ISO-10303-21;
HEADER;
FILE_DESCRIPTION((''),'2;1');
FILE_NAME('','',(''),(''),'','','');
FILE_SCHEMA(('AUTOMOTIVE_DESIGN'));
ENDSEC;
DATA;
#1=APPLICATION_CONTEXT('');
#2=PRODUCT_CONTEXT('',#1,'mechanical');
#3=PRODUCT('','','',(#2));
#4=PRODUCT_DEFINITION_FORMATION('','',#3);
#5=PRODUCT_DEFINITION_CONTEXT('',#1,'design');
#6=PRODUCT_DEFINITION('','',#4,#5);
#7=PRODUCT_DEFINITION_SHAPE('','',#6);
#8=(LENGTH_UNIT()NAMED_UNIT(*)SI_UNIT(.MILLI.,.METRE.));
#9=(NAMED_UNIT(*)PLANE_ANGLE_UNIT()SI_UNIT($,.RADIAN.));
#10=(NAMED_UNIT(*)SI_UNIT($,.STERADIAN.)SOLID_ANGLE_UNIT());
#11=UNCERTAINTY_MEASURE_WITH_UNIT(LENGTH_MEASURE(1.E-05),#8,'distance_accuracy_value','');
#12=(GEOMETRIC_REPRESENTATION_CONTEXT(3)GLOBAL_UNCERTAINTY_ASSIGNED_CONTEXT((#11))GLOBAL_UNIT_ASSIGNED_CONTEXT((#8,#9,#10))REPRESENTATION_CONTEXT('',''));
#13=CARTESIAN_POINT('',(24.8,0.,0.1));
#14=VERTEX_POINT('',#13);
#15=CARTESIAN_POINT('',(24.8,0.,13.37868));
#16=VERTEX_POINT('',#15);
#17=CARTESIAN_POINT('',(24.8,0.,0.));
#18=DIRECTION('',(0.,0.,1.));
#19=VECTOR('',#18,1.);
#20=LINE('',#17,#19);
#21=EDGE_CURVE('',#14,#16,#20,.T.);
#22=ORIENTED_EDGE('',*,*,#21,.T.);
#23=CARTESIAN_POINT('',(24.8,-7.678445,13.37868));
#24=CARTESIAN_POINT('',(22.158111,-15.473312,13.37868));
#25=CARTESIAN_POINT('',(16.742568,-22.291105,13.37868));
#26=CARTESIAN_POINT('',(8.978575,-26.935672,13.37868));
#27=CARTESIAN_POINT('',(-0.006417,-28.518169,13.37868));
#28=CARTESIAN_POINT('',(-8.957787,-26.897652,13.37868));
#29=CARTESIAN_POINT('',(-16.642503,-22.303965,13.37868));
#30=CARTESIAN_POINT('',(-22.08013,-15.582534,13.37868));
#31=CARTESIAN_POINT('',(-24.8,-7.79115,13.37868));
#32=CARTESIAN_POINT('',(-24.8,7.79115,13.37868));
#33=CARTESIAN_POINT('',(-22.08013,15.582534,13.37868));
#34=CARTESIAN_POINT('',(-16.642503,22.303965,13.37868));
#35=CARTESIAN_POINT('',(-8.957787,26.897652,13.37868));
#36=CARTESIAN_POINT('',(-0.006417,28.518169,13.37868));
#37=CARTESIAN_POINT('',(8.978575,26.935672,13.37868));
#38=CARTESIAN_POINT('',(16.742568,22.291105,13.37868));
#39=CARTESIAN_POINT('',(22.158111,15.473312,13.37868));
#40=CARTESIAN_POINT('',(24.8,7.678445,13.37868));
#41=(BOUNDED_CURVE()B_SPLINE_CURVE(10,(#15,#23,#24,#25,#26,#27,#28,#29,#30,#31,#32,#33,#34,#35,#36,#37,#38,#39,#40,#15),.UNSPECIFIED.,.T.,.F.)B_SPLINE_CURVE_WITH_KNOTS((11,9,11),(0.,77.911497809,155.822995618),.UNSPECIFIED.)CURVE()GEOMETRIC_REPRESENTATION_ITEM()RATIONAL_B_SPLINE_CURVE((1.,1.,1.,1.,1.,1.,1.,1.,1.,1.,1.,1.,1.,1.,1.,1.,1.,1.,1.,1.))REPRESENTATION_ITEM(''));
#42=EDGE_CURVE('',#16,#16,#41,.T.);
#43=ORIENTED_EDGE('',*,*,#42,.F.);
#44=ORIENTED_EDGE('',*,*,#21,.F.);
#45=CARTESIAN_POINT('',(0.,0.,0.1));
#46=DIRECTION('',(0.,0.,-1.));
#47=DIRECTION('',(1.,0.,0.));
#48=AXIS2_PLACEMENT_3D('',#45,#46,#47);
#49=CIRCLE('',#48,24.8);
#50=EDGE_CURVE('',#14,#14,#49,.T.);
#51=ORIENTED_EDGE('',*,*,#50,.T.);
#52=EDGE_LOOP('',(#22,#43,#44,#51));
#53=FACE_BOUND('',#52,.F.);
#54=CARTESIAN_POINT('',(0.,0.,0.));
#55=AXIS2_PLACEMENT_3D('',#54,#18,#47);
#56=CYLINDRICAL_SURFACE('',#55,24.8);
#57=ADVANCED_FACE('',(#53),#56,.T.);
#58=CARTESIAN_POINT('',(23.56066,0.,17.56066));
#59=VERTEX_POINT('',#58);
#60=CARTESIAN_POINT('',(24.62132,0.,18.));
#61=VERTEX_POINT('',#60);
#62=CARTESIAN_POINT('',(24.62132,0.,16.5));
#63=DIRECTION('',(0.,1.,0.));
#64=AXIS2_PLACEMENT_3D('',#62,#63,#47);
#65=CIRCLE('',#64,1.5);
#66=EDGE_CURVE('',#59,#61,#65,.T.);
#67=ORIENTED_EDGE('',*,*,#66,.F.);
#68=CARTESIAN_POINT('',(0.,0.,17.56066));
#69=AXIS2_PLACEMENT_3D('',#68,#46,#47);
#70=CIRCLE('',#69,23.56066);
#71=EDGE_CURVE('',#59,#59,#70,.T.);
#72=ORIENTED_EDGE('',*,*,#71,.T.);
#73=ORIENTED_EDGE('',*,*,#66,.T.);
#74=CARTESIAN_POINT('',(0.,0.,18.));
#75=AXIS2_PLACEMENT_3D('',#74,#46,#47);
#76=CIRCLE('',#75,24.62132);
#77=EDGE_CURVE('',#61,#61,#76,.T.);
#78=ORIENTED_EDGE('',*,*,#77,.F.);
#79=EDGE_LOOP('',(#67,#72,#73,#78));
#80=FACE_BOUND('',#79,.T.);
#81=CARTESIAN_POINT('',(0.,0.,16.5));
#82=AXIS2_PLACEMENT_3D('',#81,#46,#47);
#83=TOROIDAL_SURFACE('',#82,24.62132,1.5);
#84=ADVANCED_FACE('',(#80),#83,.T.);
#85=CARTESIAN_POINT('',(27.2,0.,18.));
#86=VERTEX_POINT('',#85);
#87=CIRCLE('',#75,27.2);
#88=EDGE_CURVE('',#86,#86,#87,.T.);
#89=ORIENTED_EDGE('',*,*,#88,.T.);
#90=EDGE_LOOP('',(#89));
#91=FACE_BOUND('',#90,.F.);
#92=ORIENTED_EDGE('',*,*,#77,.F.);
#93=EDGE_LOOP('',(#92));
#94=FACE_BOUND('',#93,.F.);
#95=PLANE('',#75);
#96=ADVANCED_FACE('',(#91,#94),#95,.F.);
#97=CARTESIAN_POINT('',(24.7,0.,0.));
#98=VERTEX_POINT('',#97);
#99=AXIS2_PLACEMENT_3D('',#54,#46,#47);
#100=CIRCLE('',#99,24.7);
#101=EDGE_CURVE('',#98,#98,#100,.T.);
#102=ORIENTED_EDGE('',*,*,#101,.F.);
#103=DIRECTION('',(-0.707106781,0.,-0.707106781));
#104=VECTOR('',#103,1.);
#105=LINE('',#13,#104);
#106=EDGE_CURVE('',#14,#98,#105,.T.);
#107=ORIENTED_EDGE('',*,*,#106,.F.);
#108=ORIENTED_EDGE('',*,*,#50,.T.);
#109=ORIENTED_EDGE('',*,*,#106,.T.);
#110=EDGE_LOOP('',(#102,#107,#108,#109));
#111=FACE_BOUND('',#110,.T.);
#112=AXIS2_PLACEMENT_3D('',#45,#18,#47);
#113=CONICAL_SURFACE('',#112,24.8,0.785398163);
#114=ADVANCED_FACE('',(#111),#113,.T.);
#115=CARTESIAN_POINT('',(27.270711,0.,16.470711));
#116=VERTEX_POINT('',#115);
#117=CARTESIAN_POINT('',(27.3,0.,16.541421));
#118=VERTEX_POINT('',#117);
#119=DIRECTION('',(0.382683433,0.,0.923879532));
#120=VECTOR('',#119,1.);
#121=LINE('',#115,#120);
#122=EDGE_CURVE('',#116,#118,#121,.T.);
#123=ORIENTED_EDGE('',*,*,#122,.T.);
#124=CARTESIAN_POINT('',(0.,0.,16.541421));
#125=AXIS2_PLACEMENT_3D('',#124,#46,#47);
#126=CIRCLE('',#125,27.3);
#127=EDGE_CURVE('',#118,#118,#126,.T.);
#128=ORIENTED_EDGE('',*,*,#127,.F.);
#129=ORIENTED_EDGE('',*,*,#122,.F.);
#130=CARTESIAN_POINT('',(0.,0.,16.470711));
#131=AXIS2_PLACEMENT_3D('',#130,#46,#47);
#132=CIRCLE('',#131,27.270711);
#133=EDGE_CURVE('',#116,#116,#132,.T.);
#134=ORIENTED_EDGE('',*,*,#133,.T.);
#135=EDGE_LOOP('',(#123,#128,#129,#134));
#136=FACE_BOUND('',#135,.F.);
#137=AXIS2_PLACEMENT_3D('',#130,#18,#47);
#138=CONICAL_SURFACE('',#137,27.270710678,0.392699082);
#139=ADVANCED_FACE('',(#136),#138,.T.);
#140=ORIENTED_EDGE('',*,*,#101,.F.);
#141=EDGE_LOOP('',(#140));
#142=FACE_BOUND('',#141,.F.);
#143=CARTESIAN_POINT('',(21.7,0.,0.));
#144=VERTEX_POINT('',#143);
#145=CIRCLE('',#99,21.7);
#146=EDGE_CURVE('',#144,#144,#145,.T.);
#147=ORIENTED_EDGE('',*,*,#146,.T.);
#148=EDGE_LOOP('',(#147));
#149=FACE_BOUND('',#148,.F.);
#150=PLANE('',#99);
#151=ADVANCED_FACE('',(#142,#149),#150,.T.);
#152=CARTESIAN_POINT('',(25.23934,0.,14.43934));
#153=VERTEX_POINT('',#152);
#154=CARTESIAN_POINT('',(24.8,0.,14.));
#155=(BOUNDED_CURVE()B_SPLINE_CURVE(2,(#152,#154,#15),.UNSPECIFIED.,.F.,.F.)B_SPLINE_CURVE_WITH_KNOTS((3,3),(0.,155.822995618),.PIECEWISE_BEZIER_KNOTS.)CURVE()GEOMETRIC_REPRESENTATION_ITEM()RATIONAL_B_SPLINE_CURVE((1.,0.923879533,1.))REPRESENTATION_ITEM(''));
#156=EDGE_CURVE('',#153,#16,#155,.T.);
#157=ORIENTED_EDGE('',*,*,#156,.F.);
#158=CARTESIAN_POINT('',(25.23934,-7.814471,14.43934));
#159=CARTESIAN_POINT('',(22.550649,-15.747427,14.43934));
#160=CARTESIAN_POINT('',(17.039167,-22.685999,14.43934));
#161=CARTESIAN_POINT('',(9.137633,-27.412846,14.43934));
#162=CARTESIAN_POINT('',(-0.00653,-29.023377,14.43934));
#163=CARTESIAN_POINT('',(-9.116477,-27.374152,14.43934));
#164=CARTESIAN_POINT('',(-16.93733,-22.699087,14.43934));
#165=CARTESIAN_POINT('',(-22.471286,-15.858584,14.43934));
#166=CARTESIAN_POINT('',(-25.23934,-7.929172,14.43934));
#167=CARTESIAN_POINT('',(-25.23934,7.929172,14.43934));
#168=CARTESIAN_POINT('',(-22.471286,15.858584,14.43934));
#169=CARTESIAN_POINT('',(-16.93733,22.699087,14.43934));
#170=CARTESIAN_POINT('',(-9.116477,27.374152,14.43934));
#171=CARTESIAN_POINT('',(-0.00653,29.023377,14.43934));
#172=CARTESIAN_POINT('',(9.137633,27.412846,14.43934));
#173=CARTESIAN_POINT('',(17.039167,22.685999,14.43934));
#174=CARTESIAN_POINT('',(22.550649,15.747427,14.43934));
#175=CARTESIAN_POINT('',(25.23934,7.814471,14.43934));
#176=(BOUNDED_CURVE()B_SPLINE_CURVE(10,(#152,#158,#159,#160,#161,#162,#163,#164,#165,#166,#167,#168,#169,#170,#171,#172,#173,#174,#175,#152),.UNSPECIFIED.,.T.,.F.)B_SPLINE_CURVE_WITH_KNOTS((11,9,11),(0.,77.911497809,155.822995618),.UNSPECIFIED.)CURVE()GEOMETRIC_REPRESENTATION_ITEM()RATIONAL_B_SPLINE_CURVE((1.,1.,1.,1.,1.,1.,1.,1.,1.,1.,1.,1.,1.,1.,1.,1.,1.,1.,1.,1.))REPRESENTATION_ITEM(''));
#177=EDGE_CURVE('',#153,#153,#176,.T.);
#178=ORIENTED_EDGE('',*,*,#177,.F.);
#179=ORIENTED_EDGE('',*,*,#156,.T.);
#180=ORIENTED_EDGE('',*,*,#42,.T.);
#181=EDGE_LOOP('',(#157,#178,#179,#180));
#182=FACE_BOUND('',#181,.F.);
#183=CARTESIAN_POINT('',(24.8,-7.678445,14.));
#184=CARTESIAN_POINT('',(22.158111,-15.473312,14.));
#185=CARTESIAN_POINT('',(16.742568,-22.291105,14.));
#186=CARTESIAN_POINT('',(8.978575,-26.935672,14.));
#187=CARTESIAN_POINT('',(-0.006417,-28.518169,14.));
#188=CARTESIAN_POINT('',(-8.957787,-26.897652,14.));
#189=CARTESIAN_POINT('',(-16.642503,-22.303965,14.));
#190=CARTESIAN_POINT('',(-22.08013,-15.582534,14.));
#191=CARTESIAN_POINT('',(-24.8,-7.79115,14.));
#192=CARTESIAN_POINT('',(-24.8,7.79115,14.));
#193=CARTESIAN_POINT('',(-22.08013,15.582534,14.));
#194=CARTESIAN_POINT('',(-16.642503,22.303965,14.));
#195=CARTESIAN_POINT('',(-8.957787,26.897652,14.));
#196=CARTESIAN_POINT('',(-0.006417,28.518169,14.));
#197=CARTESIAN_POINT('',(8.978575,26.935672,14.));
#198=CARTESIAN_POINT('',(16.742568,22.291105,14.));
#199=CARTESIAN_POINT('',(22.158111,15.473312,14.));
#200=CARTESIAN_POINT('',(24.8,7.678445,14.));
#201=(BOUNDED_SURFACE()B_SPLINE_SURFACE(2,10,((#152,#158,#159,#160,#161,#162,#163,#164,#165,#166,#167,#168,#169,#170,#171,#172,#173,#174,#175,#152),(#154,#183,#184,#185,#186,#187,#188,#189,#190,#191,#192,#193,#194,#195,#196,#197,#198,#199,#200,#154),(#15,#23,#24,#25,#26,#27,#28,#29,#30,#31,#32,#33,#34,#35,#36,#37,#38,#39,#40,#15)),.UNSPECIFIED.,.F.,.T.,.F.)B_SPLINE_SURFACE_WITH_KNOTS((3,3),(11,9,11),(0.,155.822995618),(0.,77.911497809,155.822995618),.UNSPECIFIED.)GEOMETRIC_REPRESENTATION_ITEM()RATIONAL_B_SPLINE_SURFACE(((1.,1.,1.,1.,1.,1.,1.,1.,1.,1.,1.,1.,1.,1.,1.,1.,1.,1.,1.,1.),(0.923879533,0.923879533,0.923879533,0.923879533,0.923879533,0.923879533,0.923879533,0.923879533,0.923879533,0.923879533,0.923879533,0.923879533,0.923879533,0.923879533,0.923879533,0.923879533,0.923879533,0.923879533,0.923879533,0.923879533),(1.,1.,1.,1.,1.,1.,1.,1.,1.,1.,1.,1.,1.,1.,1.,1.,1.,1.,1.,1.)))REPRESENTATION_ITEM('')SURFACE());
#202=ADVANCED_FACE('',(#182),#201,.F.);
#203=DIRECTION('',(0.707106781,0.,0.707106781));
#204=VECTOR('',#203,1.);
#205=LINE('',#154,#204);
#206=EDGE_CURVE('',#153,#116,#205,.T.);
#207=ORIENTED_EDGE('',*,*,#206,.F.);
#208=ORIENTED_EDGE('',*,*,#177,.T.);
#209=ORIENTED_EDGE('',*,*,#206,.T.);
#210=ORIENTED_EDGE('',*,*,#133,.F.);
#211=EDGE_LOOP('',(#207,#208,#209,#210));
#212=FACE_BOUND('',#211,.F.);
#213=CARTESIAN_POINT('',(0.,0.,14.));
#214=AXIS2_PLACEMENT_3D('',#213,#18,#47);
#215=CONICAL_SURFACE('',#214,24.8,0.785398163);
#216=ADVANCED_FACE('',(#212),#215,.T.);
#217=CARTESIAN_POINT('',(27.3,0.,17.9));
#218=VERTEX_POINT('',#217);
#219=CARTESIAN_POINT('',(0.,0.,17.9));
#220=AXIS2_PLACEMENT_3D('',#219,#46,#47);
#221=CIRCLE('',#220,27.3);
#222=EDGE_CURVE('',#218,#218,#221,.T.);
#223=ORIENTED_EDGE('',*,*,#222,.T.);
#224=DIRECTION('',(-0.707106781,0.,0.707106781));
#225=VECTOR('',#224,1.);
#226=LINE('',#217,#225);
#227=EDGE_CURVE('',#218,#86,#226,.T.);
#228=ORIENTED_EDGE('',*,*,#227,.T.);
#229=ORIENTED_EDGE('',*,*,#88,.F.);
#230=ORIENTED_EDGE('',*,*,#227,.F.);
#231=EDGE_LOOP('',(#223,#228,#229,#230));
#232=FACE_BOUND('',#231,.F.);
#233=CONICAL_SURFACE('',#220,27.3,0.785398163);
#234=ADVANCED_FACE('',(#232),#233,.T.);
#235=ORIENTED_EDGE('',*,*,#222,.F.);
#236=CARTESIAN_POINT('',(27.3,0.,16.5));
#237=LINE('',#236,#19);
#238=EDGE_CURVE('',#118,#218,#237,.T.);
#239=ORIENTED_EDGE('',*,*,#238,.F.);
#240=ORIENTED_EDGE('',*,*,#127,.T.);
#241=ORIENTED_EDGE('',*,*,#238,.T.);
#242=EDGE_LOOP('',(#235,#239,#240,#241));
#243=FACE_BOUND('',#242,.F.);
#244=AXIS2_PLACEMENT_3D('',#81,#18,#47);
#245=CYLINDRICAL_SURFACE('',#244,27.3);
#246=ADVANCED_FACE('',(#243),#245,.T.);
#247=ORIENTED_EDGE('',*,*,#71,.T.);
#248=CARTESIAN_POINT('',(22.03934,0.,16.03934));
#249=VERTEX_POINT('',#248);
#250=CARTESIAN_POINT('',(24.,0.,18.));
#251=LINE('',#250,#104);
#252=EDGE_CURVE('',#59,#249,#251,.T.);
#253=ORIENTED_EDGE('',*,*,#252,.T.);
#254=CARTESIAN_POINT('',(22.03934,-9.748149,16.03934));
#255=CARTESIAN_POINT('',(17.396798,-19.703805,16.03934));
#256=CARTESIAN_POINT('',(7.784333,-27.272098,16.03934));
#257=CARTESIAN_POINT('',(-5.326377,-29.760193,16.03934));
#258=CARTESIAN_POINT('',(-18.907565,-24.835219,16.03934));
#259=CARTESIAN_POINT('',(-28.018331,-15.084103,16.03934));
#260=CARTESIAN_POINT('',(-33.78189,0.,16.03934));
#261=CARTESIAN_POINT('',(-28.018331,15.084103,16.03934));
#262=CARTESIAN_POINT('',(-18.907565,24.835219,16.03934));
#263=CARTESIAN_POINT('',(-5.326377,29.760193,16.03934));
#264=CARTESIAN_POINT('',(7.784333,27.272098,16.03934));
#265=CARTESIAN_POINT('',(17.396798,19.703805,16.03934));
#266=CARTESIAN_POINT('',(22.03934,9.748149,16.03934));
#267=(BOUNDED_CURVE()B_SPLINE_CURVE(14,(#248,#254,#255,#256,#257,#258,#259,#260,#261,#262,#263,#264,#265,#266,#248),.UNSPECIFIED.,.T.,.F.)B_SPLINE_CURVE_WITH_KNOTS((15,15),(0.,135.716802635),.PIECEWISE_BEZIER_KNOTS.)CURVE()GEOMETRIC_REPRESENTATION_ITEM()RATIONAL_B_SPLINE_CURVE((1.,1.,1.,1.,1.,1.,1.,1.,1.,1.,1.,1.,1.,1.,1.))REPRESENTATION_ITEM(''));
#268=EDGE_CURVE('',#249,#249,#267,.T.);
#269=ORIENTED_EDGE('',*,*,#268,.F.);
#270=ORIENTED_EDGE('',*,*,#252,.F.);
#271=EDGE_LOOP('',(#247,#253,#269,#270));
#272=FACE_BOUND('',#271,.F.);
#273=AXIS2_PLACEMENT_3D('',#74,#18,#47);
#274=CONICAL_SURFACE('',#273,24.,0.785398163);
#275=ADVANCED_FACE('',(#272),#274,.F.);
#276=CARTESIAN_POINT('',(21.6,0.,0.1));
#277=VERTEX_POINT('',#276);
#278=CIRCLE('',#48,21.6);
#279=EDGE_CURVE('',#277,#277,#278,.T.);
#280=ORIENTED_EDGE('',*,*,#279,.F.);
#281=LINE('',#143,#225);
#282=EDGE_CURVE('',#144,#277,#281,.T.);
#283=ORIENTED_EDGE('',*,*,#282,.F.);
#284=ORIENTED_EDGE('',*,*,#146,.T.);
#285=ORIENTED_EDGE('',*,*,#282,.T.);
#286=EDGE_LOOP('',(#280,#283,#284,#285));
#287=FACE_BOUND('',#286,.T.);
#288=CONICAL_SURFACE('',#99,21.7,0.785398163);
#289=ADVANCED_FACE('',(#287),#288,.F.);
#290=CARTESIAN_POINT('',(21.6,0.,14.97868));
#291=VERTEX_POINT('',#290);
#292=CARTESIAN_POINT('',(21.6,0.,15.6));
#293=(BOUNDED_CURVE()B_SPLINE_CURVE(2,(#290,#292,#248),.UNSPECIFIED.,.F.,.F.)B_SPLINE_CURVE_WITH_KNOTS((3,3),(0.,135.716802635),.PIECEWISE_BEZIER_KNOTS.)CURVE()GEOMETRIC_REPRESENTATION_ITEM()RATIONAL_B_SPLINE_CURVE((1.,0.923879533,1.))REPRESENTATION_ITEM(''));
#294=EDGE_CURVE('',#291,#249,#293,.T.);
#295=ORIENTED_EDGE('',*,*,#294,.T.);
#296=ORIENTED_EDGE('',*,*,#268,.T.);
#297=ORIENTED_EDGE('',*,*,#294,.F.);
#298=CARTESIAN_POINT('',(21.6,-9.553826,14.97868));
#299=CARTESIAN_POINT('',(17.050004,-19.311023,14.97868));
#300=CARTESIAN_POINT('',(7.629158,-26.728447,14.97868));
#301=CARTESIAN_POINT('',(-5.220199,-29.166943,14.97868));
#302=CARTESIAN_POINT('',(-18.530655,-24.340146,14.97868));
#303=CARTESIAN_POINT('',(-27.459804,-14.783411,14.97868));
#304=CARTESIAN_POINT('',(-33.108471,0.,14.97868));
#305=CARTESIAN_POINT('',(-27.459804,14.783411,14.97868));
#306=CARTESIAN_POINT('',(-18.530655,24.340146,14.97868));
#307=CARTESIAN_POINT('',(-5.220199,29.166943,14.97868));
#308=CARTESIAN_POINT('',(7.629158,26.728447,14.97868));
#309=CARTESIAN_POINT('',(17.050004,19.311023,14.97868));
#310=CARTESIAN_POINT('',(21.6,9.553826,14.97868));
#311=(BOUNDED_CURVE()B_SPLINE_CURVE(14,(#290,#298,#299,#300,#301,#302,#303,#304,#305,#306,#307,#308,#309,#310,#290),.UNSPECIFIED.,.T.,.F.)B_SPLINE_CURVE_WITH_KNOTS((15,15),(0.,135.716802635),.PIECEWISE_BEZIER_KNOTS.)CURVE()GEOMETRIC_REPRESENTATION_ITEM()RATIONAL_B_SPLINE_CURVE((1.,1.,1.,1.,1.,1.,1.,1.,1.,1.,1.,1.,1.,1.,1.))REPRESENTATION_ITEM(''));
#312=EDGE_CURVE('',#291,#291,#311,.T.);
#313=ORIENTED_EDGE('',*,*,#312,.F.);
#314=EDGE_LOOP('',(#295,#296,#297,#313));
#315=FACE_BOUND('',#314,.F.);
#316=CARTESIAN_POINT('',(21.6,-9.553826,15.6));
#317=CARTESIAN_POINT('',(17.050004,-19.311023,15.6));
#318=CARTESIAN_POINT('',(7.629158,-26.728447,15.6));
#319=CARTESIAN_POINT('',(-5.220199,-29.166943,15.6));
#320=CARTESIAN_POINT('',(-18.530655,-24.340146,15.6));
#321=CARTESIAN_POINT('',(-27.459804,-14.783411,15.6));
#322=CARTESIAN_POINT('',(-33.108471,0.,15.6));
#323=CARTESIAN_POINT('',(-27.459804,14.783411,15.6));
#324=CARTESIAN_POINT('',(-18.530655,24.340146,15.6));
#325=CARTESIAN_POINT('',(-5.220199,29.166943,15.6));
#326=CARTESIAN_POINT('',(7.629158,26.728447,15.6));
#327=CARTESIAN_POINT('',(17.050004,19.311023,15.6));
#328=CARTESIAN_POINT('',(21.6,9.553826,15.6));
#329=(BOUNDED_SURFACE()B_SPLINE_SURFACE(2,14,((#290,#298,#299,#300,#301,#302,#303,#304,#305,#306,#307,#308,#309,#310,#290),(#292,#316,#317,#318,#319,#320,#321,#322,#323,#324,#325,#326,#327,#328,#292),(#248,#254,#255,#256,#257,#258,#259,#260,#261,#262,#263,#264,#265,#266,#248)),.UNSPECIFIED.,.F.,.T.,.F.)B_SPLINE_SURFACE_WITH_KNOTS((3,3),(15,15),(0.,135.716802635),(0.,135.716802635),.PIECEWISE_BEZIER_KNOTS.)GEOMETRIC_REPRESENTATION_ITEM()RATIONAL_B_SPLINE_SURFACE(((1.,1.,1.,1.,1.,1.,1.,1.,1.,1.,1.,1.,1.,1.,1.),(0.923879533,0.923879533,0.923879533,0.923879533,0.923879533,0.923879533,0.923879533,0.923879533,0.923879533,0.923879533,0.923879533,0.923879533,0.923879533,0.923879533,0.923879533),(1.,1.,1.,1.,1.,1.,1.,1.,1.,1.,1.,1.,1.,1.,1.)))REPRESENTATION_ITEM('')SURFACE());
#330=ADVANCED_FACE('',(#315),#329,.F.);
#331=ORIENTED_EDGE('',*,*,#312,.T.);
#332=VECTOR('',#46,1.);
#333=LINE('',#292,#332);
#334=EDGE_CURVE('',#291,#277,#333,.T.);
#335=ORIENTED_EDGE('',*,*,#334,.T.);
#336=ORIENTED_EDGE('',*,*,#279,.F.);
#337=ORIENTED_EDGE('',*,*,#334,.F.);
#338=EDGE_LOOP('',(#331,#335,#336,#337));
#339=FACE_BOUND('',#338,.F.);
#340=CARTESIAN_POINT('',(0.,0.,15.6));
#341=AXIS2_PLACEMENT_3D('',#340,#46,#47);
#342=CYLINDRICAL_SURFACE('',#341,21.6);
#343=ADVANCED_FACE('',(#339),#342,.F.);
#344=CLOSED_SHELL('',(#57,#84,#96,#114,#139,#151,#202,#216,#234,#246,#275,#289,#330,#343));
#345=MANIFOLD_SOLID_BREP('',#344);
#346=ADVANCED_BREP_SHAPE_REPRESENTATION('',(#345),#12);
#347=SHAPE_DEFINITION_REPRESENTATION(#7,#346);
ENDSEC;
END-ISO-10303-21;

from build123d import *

# Parameters (mm, degrees)
F2_R = 1.5
F3_R = 1.5
F4_R = 1.5


# Not quite as in the source:
# - a fillet or chamfer that OpenCascade refuses, or shapes differently, is made with other operations: its cross-section is extruded or revolved along the edge and cut away or added


with BuildPart() as f1:
    # F0 (on Front) → F1 (revolve)
    with BuildSketch(Plane.XZ):
        Polygon((21.6, 15.6), (21.6, 0), (24.8, 0), (24.8, 14), (27.3, 16.5), (27.3, 18), (24, 18), align=None)
    revolve(axis=Axis((0, 0, 6.0077635571), (0, 0, -1)))

    # F2
    f2_edges = [f1.edges().sort_by_distance(p)[0] for p in [
        (-21.6, 0, 15.6),
    ]]
    fillet(f2_edges, radius=F2_R)

    # F3
    f3_edges = [f1.edges().sort_by_distance(p)[0] for p in [
        (-24, 0, 18),
    ]]
    fillet(f3_edges, radius=F3_R)

    # F4
    f4_edges = [f1.edges().sort_by_distance(p)[0] for p in [
        (-24.8, 0, 14),
    ]]
    fillet(f4_edges, radius=F4_R)

    # F5: chamfer of 0.1 on 5 edges, made by hand

    # F5_s1 → F5_t2 (revolve, cut)
    with BuildSketch(Plane.XZ):
        Polygon((27.3, 17.9), (27.2, 18), (27.3, 18), align=None)
    revolve(axis=Axis((0, 0, 18), (0, 0, -1)), mode=Mode.SUBTRACT)

    # F5_s3 → F5_t4 (revolve, cut)
    with BuildSketch(Plane.XZ):
        Polygon((27.2707106781, 16.4707106781), (27.3, 16.5414213562), (27.3, 16.5), align=None)
    revolve(axis=Axis((0, 0, 16.5), (0, 0, -1)), mode=Mode.SUBTRACT)

    # F5_s5 → F5_t6 (revolve, cut)
    with BuildSketch(Plane.XZ):
        Polygon((24.8, 0.1), (24.7, 0), (24.8, 0), align=None)
    revolve(axis=Axis((0, 0, 0), (0, 0, -1)), mode=Mode.SUBTRACT)

    # F5_s7 → F5_t8 (revolve, cut)
    with BuildSketch(Plane.XZ):
        Polygon((21.7, 0), (21.6, 0.1), (21.6, 0), align=None)
    revolve(axis=Axis((0, 0, 0), (0, 0, -1)), mode=Mode.SUBTRACT)


solid = f1.part
